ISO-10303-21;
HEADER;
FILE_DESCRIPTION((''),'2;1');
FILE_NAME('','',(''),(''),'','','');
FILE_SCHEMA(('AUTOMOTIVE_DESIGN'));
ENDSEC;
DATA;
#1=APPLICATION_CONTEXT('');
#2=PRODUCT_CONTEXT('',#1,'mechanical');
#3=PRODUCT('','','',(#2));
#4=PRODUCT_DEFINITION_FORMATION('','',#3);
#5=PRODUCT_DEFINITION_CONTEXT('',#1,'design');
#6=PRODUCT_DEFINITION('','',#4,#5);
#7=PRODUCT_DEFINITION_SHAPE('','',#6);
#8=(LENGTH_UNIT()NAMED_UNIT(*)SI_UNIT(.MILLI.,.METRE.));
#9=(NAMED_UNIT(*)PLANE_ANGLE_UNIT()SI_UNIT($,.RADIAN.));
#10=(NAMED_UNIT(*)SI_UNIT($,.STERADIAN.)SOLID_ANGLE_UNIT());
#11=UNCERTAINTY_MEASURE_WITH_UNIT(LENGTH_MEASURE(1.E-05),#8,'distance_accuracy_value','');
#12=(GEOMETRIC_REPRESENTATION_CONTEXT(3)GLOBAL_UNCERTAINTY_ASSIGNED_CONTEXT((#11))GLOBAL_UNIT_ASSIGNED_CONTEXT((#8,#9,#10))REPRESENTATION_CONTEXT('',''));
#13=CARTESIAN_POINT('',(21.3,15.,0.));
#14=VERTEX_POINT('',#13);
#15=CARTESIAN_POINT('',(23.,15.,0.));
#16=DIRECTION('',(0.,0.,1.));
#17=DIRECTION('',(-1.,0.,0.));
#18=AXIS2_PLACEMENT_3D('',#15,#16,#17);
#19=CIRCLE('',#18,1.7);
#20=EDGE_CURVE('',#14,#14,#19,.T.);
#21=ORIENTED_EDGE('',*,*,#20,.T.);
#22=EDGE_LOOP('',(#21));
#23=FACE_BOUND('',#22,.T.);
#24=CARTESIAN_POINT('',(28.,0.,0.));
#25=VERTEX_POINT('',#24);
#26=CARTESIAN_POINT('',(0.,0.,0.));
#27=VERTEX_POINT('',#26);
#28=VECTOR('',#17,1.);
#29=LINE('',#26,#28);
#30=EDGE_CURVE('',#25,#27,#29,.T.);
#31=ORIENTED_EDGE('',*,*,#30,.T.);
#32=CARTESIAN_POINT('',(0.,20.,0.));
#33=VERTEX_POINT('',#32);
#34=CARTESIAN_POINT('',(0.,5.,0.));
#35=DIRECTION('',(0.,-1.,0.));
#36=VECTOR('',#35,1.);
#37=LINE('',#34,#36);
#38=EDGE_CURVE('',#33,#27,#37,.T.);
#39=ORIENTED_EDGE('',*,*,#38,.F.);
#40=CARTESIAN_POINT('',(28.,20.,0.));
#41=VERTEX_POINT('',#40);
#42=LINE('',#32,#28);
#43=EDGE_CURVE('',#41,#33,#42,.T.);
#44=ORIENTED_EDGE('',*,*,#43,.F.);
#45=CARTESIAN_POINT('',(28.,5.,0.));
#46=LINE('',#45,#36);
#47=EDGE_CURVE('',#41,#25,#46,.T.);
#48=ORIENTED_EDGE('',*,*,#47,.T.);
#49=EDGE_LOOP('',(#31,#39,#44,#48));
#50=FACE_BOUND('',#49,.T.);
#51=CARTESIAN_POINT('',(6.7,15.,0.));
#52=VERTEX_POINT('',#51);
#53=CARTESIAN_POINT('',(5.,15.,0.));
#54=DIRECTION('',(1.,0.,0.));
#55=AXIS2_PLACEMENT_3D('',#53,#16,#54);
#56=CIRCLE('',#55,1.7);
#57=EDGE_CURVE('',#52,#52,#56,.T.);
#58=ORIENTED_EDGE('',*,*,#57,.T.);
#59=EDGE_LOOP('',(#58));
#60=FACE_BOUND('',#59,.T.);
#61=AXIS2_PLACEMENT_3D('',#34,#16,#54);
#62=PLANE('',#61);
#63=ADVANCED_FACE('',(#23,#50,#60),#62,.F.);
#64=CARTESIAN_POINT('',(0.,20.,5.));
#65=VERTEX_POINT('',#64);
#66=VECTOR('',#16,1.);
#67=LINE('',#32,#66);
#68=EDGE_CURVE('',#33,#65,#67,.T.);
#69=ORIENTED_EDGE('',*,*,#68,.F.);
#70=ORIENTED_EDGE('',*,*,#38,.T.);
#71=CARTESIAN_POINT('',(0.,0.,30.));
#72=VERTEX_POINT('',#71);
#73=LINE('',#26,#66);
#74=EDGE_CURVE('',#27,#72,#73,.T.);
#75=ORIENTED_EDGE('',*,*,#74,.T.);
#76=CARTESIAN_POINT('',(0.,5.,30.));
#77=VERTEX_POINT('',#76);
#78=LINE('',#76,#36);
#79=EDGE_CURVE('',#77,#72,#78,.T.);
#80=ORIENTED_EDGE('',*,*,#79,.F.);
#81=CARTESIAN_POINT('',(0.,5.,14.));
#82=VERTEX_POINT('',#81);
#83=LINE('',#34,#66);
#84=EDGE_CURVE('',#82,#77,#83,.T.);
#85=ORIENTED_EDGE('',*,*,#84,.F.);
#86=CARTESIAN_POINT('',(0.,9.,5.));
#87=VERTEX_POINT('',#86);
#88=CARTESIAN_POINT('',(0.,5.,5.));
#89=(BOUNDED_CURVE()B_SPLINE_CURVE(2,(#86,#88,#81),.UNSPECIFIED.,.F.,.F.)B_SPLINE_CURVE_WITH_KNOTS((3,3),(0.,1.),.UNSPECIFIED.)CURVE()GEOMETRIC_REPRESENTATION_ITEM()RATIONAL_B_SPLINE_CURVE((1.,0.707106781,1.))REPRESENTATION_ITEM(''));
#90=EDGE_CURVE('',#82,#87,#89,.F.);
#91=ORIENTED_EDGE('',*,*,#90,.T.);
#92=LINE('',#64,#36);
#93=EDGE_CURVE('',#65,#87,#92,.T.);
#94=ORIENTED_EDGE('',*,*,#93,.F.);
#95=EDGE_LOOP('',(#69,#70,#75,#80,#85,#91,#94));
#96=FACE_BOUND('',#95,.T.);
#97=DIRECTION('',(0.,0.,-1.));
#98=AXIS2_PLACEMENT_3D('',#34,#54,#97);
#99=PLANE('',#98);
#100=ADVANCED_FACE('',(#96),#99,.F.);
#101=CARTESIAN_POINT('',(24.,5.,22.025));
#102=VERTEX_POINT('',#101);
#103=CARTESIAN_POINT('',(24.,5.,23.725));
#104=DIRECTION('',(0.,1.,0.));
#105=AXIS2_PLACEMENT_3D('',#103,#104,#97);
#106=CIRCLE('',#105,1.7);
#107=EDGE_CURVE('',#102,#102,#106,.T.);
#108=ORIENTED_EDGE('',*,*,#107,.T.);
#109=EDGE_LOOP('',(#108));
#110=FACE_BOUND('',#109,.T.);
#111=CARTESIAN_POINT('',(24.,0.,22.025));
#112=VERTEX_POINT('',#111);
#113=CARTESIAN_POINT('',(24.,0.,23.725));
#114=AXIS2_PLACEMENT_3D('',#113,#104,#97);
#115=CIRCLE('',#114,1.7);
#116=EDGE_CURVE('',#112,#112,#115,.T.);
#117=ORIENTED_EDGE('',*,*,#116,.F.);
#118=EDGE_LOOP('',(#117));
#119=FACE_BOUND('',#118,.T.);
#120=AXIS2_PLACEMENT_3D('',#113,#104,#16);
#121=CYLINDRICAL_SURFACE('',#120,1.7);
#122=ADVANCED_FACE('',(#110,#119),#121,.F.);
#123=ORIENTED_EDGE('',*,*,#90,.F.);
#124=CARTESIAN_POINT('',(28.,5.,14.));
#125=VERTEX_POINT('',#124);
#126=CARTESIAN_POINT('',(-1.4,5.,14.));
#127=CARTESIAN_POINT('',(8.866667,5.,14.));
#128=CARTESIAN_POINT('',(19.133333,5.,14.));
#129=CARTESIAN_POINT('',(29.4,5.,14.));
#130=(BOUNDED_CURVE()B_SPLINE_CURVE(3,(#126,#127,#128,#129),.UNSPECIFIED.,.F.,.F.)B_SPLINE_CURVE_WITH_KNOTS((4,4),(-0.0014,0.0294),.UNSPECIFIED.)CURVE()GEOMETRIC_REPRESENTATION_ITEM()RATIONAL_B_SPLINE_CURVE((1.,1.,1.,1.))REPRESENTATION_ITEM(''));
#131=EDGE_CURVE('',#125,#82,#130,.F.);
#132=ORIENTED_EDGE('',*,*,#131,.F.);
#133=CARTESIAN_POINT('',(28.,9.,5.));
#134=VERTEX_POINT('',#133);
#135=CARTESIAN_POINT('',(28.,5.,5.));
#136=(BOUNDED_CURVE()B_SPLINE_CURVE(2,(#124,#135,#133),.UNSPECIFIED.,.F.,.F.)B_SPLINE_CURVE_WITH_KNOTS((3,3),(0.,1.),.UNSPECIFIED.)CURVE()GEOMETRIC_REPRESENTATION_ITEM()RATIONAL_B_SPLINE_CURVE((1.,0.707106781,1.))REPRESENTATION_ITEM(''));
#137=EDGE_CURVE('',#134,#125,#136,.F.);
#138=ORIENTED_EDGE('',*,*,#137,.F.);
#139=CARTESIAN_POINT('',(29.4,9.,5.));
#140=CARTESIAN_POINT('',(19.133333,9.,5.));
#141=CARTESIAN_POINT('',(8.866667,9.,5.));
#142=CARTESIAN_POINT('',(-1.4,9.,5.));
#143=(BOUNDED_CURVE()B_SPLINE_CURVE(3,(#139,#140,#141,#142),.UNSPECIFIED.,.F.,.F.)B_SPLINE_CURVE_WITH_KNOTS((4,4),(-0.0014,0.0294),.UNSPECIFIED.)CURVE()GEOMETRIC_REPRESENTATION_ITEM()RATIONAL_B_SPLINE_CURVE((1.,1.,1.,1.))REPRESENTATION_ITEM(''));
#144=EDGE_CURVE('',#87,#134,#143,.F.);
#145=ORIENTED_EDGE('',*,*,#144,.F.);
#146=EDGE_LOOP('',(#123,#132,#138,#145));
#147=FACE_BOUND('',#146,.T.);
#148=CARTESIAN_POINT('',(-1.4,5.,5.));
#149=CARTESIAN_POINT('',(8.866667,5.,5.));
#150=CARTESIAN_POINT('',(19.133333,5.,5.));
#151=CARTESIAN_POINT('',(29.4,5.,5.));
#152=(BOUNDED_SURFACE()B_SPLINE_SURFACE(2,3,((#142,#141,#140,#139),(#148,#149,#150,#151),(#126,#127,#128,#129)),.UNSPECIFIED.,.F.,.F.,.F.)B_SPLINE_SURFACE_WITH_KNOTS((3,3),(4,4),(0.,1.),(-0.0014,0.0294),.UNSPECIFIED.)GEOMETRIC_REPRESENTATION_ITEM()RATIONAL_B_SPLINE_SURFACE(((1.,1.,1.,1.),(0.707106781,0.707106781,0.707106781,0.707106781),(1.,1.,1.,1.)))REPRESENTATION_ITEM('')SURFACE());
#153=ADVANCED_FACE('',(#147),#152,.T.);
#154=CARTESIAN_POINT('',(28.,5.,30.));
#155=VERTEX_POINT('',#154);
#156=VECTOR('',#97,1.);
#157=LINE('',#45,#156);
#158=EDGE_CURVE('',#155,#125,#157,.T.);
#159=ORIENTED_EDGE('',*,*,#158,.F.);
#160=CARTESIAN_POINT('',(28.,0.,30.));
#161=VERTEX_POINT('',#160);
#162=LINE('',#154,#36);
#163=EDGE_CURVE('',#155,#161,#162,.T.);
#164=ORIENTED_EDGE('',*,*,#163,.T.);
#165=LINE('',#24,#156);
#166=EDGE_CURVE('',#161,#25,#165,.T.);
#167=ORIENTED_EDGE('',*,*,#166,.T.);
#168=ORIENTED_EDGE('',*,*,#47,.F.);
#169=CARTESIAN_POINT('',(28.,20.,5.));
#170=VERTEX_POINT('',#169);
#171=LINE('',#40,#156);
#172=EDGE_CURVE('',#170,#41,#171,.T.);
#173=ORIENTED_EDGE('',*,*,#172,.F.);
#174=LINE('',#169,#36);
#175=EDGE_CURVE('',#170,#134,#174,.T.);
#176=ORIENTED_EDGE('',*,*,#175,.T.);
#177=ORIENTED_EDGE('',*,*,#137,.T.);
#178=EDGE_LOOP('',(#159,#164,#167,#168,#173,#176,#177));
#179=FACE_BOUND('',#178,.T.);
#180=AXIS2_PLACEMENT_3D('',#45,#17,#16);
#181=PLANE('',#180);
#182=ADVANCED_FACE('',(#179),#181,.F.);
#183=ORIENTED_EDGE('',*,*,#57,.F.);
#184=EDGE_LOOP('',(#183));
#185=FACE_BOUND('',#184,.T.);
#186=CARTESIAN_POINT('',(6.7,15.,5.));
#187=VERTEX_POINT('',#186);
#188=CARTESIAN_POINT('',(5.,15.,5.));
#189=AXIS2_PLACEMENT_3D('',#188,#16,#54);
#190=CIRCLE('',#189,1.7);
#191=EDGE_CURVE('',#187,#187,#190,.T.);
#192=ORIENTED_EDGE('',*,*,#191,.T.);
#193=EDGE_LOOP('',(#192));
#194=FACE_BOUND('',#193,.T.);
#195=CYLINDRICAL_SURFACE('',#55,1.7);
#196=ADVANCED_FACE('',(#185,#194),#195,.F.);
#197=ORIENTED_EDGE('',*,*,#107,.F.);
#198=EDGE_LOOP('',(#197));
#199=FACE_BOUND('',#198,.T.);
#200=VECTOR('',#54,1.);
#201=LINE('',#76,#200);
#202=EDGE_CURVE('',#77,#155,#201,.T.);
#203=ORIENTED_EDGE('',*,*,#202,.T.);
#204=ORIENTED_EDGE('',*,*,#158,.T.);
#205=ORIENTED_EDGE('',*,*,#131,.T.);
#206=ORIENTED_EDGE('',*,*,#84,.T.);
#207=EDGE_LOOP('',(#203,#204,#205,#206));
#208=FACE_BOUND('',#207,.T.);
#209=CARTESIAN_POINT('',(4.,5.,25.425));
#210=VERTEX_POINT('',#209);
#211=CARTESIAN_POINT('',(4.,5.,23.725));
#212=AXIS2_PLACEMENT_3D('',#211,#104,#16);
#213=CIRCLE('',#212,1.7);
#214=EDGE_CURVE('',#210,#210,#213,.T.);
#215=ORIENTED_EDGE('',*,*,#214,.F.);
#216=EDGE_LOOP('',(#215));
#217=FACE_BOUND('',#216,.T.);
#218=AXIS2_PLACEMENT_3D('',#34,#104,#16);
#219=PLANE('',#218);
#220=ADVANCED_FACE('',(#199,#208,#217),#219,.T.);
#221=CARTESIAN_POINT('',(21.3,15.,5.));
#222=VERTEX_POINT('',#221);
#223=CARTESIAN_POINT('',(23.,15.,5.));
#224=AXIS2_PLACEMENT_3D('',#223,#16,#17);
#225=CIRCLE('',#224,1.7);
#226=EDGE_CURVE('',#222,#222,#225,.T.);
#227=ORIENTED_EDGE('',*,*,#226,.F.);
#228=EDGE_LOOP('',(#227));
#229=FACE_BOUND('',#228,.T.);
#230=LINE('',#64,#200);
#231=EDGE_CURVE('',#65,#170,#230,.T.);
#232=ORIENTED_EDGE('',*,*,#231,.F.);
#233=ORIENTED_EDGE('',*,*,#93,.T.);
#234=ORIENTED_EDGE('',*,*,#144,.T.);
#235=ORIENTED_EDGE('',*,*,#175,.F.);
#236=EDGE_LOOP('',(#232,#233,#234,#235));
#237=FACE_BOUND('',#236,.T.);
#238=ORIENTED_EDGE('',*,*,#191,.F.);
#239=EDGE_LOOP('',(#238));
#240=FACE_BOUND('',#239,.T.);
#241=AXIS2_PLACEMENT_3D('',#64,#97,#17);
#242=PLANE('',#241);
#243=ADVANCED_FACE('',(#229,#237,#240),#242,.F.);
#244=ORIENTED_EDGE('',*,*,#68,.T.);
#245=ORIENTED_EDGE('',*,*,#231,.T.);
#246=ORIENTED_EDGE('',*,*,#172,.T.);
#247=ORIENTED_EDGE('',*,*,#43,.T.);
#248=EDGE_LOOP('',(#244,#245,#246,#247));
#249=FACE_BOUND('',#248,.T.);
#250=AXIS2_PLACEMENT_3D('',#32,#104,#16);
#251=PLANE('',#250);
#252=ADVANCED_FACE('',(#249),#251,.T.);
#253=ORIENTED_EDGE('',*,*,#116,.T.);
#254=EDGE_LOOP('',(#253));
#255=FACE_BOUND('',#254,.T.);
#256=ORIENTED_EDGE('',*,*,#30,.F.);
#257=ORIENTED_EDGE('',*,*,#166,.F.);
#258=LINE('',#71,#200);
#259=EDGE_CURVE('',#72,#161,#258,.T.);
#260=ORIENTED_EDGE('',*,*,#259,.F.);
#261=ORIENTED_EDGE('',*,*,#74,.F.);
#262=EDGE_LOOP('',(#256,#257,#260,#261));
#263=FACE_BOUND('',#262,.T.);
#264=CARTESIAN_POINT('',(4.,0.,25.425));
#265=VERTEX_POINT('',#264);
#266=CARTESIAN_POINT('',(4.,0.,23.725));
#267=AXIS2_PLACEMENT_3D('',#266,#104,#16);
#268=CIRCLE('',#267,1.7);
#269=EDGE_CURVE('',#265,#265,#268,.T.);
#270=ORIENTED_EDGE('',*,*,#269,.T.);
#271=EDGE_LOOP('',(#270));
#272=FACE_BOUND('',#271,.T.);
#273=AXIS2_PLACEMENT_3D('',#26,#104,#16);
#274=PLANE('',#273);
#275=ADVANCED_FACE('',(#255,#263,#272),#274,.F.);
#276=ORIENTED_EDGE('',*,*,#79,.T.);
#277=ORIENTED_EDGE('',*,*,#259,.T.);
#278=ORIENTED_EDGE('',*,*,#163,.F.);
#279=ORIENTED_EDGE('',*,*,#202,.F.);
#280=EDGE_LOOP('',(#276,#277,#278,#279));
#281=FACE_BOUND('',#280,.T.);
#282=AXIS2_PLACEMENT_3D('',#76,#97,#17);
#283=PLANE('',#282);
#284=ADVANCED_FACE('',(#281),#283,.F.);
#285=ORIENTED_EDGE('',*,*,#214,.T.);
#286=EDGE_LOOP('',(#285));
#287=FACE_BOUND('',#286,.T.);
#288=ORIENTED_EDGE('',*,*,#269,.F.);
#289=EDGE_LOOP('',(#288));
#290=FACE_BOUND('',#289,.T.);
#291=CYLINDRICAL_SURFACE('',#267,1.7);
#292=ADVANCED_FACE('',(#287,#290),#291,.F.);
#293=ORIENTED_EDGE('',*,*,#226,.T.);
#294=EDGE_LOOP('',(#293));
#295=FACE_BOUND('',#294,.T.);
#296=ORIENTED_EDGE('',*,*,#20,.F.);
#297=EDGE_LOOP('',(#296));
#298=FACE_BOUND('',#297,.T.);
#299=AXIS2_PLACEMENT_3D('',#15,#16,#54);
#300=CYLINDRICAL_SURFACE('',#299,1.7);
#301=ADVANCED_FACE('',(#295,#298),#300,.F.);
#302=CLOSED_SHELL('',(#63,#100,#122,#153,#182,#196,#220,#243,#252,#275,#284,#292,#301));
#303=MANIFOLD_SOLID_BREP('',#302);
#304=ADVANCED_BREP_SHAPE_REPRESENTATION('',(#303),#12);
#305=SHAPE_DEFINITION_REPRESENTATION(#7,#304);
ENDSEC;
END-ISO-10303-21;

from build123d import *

# Parameters (mm, degrees)
SKETCH_1_W          = 28
SKETCH_1_H          = 30
EXTRUDE_1_DEPTH     = 5
SKETCH_2_W          = 28
SKETCH_2_H          = 5
EXTRUDE_2_DEPTH     = 15
SKETCH_3_R          = 1.7
CUT_EXTRUDE_1_DEPTH = 5
SKETCH_4_R          = 1.7
CUT_EXTRUDE_2_DEPTH = 5
FILLET_1_SIZE       = 9
FILLET_1_SIZE_2     = 4


with BuildPart() as part:
    # 草图1 → 凸台-拉伸1 (new body)
    with BuildSketch(Plane(origin=(0, 0, 0), x_dir=(1, 0, 0), z_dir=(0, 1, 0))):
        with Locations((14, -15)):
            Rectangle(SKETCH_1_W, SKETCH_1_H)
    extrude(amount=EXTRUDE_1_DEPTH)

    # 草图2 → 凸台-拉伸2 (add)
    with BuildSketch(Plane(origin=(0, 5, 0), x_dir=(1, 0, 0), z_dir=(0, 1, 0))):
        with Locations((14, -2.5)):
            Rectangle(SKETCH_2_W, SKETCH_2_H)
    extrude(amount=EXTRUDE_2_DEPTH)

    # 草图3 → 切除-拉伸1 (cut)
    with BuildSketch(Plane(origin=(0, 5, 0), x_dir=(1, 0, 0), z_dir=(0, 1, 0))):
        with Locations(Location((4, -23.725, 0), (0, 0, 270))):
            Circle(SKETCH_3_R)
        with Locations(Location((24, -23.725, 0), (0, 0, 90))):
            Circle(SKETCH_3_R)
    extrude(amount=-CUT_EXTRUDE_1_DEPTH, mode=Mode.SUBTRACT)

    # 草图4 → 切除-拉伸2 (cut)
    with BuildSketch(Plane.XY.offset(5)):
        with Locations((5, 15)):
            Circle(SKETCH_4_R)
        with Locations(Location((23, 15, 0), (0, 0, 180))):
            Circle(SKETCH_4_R)
    extrude(amount=-CUT_EXTRUDE_2_DEPTH, mode=Mode.SUBTRACT)

    # 圆角1
    # an asymmetric fillet: 9, 4 mm, written as the material it adds along each edge
    with BuildSketch(Plane(origin=(28, 5, 5), x_dir=(0, 0, 1), z_dir=(-1, 0, 0))) as fillet_1_piece_1:
        with BuildLine():
            Bezier((FILLET_1_SIZE, 0), (0, 0), (0, FILLET_1_SIZE_2), weights=[1, 0.707106781, 1])
            Line((0, FILLET_1_SIZE_2), (0, 0))
            Line((0, 0), (FILLET_1_SIZE, 0))
        make_face()
    extrude(amount=28)


solid = part.part
